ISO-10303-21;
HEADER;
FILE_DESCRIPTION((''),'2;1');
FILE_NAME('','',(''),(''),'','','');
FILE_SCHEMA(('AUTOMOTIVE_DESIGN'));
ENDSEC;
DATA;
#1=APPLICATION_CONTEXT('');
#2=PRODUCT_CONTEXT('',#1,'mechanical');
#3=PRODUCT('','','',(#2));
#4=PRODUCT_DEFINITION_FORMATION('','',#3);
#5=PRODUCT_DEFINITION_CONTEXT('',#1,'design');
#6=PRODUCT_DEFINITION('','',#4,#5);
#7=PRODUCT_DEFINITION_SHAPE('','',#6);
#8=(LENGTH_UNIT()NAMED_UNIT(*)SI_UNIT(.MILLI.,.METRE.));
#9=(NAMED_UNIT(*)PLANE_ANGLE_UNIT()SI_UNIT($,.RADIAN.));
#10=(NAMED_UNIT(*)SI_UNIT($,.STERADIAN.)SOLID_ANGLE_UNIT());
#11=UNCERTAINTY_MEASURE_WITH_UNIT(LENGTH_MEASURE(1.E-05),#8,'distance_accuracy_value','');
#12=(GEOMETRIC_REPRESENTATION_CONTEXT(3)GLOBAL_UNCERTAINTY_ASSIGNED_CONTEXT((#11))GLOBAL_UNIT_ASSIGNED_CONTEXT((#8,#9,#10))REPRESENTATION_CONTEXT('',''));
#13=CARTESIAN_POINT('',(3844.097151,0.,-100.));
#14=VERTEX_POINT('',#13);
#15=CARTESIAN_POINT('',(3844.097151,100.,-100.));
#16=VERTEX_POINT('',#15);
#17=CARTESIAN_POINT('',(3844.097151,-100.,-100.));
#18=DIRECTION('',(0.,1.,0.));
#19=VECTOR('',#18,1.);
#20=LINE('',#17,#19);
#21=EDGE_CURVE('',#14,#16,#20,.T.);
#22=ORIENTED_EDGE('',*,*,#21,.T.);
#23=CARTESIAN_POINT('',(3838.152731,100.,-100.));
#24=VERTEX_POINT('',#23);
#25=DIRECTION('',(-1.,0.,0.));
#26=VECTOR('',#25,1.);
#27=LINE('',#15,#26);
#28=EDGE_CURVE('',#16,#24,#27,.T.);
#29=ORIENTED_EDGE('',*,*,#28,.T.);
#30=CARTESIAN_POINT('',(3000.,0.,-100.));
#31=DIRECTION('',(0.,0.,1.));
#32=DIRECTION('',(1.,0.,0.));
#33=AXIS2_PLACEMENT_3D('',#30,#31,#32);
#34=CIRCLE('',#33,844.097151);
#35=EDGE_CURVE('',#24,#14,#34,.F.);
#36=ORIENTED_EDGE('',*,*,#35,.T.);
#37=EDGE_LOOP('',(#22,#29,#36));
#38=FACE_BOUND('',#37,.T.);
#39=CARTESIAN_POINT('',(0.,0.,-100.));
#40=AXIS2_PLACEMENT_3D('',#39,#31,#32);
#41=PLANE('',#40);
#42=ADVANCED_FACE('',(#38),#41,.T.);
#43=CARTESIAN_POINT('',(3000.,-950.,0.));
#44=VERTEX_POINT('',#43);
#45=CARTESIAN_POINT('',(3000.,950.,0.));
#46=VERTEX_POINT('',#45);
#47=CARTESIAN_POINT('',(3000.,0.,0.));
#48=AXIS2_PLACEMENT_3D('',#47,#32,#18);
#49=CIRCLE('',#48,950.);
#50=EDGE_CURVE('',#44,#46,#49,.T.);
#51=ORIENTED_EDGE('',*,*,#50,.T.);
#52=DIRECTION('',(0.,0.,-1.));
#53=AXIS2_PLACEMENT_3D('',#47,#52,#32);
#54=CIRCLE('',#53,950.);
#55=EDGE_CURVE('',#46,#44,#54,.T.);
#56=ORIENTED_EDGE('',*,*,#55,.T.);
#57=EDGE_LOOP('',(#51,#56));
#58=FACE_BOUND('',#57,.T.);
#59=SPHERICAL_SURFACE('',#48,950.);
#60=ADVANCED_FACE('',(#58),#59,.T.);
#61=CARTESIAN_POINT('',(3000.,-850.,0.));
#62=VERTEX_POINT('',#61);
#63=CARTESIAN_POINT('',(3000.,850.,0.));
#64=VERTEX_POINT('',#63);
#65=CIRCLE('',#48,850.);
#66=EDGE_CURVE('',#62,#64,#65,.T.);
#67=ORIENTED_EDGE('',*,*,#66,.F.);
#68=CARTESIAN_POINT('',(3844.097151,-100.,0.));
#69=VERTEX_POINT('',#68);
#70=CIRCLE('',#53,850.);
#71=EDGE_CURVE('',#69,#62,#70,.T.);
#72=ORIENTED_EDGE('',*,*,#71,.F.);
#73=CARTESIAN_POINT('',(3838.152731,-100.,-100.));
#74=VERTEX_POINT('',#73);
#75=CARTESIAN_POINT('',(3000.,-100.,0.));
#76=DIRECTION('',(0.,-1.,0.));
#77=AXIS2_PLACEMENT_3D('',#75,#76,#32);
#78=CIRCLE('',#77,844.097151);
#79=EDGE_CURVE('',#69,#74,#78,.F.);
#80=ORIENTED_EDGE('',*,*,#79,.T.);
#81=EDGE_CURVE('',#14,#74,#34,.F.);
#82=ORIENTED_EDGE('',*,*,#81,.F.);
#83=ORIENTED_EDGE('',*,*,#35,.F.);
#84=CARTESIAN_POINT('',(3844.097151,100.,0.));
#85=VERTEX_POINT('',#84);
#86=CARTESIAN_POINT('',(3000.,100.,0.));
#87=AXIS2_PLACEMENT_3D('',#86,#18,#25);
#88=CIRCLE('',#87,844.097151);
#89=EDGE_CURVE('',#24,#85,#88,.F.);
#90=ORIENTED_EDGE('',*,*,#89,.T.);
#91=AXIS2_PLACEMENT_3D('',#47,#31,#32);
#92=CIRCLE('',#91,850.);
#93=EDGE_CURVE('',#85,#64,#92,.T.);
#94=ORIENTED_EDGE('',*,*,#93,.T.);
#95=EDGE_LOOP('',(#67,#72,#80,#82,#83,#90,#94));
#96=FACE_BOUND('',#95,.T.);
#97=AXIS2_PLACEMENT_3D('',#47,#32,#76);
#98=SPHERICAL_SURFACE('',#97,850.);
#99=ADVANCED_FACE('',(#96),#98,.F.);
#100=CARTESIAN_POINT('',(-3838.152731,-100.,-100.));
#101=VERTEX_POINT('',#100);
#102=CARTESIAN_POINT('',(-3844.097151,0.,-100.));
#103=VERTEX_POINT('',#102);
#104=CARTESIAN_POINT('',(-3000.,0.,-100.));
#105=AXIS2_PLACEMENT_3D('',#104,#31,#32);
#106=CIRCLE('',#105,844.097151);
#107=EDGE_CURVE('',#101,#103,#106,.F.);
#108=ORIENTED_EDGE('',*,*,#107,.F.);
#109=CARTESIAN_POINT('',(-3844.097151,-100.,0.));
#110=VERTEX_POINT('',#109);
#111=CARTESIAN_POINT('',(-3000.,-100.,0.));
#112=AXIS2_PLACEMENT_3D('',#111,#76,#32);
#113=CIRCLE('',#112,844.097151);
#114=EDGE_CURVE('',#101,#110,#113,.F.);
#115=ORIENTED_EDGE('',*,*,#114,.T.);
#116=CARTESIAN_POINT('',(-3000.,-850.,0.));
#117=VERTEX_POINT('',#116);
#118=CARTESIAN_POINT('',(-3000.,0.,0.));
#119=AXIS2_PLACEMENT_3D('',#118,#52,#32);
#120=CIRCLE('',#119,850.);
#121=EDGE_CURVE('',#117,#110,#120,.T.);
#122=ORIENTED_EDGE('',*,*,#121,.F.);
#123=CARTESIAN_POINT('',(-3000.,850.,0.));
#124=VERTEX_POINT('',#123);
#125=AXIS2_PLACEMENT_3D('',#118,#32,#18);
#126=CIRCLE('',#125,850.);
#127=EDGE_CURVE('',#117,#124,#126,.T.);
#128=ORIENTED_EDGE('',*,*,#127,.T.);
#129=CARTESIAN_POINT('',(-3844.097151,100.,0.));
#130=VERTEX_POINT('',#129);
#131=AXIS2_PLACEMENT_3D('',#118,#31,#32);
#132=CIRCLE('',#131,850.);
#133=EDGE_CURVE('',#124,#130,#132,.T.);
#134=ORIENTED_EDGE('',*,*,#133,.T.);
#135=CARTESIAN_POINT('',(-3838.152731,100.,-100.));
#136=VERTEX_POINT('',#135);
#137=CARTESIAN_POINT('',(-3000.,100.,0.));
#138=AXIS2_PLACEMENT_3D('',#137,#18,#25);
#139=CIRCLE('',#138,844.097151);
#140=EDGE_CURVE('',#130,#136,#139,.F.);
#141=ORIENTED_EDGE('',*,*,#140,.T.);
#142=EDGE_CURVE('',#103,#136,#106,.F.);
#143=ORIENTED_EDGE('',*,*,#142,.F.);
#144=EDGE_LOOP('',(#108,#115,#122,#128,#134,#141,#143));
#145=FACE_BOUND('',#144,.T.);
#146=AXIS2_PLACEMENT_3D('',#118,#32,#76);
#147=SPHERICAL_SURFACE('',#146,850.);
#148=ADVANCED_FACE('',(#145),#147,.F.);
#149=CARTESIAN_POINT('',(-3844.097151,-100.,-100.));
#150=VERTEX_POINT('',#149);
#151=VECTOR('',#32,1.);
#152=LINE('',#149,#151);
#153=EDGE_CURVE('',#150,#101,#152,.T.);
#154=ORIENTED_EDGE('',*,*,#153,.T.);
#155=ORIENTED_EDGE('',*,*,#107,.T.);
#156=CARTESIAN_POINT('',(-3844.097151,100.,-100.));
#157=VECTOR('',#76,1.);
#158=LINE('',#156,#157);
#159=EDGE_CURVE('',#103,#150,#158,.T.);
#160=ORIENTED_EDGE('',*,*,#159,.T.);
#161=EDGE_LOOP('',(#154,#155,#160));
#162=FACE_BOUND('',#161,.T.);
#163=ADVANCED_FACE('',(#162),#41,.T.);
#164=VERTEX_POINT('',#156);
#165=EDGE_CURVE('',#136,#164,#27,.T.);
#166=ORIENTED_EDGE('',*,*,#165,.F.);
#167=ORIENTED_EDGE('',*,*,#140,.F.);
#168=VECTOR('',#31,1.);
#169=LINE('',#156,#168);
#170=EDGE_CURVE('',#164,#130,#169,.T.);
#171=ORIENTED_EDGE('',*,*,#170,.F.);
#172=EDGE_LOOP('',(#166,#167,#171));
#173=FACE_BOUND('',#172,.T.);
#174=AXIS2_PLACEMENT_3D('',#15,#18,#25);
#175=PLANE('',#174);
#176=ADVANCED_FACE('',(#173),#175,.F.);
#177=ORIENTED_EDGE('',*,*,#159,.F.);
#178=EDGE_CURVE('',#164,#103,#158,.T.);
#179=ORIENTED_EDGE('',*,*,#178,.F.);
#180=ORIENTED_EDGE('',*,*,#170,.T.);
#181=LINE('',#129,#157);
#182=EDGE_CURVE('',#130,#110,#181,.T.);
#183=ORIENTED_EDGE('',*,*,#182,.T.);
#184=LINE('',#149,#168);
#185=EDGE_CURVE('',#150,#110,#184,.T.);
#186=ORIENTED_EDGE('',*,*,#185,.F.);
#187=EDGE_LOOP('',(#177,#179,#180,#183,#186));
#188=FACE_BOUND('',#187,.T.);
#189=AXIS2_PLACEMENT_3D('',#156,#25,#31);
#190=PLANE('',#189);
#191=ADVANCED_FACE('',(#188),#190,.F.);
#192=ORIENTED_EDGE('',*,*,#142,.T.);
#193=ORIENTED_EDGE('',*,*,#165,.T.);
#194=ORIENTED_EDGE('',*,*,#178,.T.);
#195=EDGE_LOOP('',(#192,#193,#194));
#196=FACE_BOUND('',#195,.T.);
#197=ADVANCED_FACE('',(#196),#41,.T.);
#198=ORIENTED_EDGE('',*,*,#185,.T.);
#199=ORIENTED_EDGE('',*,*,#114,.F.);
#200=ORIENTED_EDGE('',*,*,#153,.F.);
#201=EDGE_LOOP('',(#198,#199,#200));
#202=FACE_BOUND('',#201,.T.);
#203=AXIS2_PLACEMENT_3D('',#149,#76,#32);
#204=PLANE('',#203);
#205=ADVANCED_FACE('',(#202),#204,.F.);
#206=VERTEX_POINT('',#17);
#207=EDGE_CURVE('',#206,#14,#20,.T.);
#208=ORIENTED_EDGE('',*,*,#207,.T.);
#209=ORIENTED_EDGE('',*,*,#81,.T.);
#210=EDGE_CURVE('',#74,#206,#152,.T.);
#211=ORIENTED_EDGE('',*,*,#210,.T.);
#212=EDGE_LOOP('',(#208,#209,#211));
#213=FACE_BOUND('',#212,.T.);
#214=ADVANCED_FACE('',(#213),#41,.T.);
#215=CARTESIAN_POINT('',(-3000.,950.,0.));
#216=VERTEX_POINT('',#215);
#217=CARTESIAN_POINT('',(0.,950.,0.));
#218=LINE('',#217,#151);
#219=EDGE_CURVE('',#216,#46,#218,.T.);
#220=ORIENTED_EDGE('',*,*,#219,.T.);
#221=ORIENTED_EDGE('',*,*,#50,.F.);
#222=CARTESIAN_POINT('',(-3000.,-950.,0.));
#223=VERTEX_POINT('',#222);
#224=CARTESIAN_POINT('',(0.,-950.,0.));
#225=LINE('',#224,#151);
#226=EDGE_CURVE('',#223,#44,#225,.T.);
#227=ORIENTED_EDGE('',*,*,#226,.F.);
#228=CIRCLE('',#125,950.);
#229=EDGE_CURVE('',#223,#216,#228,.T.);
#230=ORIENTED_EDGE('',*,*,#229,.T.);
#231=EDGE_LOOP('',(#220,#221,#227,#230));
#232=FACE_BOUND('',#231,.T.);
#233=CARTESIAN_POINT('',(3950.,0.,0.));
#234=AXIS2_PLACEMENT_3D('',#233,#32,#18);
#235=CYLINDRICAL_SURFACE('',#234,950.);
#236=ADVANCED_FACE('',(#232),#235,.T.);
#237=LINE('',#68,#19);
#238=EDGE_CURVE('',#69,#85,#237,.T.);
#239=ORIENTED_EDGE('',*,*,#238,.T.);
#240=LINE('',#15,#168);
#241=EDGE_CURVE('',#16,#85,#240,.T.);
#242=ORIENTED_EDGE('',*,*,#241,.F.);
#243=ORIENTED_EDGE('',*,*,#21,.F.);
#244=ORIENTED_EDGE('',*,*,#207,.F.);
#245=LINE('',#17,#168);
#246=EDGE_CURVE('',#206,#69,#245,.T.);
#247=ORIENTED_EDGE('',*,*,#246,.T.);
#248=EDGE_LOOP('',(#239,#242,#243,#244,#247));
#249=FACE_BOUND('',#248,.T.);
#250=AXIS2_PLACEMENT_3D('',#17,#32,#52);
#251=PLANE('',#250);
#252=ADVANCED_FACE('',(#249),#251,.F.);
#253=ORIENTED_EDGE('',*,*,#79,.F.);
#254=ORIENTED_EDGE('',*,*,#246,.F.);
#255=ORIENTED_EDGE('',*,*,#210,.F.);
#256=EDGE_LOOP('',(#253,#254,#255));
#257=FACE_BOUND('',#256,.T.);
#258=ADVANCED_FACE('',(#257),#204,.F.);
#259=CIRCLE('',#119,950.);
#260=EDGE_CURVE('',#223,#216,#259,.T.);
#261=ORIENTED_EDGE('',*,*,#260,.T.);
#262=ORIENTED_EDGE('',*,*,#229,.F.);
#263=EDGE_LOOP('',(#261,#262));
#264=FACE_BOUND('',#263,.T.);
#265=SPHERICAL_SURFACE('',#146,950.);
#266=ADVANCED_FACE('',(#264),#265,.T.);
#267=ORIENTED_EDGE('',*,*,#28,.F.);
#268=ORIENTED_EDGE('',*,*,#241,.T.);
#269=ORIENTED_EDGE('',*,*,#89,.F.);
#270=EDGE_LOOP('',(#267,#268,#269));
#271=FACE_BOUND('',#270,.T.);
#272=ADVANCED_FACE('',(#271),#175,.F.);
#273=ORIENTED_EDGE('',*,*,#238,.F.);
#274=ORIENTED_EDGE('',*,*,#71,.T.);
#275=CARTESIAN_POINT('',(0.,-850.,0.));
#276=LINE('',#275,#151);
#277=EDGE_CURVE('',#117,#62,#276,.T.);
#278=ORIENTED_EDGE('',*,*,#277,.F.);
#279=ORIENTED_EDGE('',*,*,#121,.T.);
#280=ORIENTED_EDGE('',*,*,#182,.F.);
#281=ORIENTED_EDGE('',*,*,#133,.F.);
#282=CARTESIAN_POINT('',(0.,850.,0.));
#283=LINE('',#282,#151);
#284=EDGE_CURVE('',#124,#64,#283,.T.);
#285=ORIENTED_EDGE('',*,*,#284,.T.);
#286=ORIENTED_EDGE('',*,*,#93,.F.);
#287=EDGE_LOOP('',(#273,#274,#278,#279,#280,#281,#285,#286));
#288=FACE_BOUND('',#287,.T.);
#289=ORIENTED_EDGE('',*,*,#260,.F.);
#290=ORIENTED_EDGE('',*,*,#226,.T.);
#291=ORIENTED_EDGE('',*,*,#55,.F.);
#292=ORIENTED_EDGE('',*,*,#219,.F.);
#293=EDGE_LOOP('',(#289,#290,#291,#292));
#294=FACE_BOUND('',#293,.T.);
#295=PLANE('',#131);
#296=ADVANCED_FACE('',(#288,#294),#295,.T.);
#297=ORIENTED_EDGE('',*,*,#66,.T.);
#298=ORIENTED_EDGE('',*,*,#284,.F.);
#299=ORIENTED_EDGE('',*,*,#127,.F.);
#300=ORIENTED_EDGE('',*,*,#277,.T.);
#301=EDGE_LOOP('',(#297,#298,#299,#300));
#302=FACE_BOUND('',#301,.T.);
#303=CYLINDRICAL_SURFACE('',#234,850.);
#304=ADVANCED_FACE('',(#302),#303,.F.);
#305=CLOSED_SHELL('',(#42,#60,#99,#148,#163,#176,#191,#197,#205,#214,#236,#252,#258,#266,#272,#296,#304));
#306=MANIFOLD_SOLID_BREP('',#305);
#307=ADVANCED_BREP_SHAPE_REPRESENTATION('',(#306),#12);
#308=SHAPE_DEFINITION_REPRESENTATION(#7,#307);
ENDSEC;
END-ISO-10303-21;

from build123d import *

# Parameters (mm, degrees)
REVOLVE_THIN4_ANGLE = 180
SKETCH3_W           = 7688.194301614
SKETCH3_H           = 200
CUT_EXTRUDE1_DEPTH  = 100


# Read off the part's stored shape, not the designer's step: Revolve-Thin4
with BuildPart() as part:
    # Revolve-Thin4 outline → Revolve-Thin4 (revolve)
    with BuildSketch(Plane(origin=(0, 0, 0), x_dir=(0, -1, 0), z_dir=(0, 0, 1))):
        with BuildLine():
            Line((950, -3000), (950, 3000))
            ThreePointArc((950, 3000), (671.751442127, 3671.751442127), (0, 3950))
            Line((0, 3950), (0, -3950))
            ThreePointArc((0, -3950), (671.751442127, -3671.751442127), (950, -3000))
        make_face()
        with BuildLine():
            Line((850, 3000), (850, -3000))
            ThreePointArc((850, -3000), (635.413251357, -3564.579489532), (100, -3844.097150807))
            Line((100, -3844.097150807), (100, 3844.097150807))
            ThreePointArc((100, 3844.097150807), (635.413251357, 3564.579489532), (850, 3000))
        make_face(mode=Mode.SUBTRACT)
    revolve(axis=Axis((0, 0, 0), (1, 0, 0)), revolution_arc=REVOLVE_THIN4_ANGLE)

    # Sketch3 → Cut-Extrude1 (cut)
    with BuildSketch(Plane.XY):
        Rectangle(SKETCH3_W, SKETCH3_H)
    extrude(amount=-CUT_EXTRUDE1_DEPTH, mode=Mode.SUBTRACT)


solid = part.part
